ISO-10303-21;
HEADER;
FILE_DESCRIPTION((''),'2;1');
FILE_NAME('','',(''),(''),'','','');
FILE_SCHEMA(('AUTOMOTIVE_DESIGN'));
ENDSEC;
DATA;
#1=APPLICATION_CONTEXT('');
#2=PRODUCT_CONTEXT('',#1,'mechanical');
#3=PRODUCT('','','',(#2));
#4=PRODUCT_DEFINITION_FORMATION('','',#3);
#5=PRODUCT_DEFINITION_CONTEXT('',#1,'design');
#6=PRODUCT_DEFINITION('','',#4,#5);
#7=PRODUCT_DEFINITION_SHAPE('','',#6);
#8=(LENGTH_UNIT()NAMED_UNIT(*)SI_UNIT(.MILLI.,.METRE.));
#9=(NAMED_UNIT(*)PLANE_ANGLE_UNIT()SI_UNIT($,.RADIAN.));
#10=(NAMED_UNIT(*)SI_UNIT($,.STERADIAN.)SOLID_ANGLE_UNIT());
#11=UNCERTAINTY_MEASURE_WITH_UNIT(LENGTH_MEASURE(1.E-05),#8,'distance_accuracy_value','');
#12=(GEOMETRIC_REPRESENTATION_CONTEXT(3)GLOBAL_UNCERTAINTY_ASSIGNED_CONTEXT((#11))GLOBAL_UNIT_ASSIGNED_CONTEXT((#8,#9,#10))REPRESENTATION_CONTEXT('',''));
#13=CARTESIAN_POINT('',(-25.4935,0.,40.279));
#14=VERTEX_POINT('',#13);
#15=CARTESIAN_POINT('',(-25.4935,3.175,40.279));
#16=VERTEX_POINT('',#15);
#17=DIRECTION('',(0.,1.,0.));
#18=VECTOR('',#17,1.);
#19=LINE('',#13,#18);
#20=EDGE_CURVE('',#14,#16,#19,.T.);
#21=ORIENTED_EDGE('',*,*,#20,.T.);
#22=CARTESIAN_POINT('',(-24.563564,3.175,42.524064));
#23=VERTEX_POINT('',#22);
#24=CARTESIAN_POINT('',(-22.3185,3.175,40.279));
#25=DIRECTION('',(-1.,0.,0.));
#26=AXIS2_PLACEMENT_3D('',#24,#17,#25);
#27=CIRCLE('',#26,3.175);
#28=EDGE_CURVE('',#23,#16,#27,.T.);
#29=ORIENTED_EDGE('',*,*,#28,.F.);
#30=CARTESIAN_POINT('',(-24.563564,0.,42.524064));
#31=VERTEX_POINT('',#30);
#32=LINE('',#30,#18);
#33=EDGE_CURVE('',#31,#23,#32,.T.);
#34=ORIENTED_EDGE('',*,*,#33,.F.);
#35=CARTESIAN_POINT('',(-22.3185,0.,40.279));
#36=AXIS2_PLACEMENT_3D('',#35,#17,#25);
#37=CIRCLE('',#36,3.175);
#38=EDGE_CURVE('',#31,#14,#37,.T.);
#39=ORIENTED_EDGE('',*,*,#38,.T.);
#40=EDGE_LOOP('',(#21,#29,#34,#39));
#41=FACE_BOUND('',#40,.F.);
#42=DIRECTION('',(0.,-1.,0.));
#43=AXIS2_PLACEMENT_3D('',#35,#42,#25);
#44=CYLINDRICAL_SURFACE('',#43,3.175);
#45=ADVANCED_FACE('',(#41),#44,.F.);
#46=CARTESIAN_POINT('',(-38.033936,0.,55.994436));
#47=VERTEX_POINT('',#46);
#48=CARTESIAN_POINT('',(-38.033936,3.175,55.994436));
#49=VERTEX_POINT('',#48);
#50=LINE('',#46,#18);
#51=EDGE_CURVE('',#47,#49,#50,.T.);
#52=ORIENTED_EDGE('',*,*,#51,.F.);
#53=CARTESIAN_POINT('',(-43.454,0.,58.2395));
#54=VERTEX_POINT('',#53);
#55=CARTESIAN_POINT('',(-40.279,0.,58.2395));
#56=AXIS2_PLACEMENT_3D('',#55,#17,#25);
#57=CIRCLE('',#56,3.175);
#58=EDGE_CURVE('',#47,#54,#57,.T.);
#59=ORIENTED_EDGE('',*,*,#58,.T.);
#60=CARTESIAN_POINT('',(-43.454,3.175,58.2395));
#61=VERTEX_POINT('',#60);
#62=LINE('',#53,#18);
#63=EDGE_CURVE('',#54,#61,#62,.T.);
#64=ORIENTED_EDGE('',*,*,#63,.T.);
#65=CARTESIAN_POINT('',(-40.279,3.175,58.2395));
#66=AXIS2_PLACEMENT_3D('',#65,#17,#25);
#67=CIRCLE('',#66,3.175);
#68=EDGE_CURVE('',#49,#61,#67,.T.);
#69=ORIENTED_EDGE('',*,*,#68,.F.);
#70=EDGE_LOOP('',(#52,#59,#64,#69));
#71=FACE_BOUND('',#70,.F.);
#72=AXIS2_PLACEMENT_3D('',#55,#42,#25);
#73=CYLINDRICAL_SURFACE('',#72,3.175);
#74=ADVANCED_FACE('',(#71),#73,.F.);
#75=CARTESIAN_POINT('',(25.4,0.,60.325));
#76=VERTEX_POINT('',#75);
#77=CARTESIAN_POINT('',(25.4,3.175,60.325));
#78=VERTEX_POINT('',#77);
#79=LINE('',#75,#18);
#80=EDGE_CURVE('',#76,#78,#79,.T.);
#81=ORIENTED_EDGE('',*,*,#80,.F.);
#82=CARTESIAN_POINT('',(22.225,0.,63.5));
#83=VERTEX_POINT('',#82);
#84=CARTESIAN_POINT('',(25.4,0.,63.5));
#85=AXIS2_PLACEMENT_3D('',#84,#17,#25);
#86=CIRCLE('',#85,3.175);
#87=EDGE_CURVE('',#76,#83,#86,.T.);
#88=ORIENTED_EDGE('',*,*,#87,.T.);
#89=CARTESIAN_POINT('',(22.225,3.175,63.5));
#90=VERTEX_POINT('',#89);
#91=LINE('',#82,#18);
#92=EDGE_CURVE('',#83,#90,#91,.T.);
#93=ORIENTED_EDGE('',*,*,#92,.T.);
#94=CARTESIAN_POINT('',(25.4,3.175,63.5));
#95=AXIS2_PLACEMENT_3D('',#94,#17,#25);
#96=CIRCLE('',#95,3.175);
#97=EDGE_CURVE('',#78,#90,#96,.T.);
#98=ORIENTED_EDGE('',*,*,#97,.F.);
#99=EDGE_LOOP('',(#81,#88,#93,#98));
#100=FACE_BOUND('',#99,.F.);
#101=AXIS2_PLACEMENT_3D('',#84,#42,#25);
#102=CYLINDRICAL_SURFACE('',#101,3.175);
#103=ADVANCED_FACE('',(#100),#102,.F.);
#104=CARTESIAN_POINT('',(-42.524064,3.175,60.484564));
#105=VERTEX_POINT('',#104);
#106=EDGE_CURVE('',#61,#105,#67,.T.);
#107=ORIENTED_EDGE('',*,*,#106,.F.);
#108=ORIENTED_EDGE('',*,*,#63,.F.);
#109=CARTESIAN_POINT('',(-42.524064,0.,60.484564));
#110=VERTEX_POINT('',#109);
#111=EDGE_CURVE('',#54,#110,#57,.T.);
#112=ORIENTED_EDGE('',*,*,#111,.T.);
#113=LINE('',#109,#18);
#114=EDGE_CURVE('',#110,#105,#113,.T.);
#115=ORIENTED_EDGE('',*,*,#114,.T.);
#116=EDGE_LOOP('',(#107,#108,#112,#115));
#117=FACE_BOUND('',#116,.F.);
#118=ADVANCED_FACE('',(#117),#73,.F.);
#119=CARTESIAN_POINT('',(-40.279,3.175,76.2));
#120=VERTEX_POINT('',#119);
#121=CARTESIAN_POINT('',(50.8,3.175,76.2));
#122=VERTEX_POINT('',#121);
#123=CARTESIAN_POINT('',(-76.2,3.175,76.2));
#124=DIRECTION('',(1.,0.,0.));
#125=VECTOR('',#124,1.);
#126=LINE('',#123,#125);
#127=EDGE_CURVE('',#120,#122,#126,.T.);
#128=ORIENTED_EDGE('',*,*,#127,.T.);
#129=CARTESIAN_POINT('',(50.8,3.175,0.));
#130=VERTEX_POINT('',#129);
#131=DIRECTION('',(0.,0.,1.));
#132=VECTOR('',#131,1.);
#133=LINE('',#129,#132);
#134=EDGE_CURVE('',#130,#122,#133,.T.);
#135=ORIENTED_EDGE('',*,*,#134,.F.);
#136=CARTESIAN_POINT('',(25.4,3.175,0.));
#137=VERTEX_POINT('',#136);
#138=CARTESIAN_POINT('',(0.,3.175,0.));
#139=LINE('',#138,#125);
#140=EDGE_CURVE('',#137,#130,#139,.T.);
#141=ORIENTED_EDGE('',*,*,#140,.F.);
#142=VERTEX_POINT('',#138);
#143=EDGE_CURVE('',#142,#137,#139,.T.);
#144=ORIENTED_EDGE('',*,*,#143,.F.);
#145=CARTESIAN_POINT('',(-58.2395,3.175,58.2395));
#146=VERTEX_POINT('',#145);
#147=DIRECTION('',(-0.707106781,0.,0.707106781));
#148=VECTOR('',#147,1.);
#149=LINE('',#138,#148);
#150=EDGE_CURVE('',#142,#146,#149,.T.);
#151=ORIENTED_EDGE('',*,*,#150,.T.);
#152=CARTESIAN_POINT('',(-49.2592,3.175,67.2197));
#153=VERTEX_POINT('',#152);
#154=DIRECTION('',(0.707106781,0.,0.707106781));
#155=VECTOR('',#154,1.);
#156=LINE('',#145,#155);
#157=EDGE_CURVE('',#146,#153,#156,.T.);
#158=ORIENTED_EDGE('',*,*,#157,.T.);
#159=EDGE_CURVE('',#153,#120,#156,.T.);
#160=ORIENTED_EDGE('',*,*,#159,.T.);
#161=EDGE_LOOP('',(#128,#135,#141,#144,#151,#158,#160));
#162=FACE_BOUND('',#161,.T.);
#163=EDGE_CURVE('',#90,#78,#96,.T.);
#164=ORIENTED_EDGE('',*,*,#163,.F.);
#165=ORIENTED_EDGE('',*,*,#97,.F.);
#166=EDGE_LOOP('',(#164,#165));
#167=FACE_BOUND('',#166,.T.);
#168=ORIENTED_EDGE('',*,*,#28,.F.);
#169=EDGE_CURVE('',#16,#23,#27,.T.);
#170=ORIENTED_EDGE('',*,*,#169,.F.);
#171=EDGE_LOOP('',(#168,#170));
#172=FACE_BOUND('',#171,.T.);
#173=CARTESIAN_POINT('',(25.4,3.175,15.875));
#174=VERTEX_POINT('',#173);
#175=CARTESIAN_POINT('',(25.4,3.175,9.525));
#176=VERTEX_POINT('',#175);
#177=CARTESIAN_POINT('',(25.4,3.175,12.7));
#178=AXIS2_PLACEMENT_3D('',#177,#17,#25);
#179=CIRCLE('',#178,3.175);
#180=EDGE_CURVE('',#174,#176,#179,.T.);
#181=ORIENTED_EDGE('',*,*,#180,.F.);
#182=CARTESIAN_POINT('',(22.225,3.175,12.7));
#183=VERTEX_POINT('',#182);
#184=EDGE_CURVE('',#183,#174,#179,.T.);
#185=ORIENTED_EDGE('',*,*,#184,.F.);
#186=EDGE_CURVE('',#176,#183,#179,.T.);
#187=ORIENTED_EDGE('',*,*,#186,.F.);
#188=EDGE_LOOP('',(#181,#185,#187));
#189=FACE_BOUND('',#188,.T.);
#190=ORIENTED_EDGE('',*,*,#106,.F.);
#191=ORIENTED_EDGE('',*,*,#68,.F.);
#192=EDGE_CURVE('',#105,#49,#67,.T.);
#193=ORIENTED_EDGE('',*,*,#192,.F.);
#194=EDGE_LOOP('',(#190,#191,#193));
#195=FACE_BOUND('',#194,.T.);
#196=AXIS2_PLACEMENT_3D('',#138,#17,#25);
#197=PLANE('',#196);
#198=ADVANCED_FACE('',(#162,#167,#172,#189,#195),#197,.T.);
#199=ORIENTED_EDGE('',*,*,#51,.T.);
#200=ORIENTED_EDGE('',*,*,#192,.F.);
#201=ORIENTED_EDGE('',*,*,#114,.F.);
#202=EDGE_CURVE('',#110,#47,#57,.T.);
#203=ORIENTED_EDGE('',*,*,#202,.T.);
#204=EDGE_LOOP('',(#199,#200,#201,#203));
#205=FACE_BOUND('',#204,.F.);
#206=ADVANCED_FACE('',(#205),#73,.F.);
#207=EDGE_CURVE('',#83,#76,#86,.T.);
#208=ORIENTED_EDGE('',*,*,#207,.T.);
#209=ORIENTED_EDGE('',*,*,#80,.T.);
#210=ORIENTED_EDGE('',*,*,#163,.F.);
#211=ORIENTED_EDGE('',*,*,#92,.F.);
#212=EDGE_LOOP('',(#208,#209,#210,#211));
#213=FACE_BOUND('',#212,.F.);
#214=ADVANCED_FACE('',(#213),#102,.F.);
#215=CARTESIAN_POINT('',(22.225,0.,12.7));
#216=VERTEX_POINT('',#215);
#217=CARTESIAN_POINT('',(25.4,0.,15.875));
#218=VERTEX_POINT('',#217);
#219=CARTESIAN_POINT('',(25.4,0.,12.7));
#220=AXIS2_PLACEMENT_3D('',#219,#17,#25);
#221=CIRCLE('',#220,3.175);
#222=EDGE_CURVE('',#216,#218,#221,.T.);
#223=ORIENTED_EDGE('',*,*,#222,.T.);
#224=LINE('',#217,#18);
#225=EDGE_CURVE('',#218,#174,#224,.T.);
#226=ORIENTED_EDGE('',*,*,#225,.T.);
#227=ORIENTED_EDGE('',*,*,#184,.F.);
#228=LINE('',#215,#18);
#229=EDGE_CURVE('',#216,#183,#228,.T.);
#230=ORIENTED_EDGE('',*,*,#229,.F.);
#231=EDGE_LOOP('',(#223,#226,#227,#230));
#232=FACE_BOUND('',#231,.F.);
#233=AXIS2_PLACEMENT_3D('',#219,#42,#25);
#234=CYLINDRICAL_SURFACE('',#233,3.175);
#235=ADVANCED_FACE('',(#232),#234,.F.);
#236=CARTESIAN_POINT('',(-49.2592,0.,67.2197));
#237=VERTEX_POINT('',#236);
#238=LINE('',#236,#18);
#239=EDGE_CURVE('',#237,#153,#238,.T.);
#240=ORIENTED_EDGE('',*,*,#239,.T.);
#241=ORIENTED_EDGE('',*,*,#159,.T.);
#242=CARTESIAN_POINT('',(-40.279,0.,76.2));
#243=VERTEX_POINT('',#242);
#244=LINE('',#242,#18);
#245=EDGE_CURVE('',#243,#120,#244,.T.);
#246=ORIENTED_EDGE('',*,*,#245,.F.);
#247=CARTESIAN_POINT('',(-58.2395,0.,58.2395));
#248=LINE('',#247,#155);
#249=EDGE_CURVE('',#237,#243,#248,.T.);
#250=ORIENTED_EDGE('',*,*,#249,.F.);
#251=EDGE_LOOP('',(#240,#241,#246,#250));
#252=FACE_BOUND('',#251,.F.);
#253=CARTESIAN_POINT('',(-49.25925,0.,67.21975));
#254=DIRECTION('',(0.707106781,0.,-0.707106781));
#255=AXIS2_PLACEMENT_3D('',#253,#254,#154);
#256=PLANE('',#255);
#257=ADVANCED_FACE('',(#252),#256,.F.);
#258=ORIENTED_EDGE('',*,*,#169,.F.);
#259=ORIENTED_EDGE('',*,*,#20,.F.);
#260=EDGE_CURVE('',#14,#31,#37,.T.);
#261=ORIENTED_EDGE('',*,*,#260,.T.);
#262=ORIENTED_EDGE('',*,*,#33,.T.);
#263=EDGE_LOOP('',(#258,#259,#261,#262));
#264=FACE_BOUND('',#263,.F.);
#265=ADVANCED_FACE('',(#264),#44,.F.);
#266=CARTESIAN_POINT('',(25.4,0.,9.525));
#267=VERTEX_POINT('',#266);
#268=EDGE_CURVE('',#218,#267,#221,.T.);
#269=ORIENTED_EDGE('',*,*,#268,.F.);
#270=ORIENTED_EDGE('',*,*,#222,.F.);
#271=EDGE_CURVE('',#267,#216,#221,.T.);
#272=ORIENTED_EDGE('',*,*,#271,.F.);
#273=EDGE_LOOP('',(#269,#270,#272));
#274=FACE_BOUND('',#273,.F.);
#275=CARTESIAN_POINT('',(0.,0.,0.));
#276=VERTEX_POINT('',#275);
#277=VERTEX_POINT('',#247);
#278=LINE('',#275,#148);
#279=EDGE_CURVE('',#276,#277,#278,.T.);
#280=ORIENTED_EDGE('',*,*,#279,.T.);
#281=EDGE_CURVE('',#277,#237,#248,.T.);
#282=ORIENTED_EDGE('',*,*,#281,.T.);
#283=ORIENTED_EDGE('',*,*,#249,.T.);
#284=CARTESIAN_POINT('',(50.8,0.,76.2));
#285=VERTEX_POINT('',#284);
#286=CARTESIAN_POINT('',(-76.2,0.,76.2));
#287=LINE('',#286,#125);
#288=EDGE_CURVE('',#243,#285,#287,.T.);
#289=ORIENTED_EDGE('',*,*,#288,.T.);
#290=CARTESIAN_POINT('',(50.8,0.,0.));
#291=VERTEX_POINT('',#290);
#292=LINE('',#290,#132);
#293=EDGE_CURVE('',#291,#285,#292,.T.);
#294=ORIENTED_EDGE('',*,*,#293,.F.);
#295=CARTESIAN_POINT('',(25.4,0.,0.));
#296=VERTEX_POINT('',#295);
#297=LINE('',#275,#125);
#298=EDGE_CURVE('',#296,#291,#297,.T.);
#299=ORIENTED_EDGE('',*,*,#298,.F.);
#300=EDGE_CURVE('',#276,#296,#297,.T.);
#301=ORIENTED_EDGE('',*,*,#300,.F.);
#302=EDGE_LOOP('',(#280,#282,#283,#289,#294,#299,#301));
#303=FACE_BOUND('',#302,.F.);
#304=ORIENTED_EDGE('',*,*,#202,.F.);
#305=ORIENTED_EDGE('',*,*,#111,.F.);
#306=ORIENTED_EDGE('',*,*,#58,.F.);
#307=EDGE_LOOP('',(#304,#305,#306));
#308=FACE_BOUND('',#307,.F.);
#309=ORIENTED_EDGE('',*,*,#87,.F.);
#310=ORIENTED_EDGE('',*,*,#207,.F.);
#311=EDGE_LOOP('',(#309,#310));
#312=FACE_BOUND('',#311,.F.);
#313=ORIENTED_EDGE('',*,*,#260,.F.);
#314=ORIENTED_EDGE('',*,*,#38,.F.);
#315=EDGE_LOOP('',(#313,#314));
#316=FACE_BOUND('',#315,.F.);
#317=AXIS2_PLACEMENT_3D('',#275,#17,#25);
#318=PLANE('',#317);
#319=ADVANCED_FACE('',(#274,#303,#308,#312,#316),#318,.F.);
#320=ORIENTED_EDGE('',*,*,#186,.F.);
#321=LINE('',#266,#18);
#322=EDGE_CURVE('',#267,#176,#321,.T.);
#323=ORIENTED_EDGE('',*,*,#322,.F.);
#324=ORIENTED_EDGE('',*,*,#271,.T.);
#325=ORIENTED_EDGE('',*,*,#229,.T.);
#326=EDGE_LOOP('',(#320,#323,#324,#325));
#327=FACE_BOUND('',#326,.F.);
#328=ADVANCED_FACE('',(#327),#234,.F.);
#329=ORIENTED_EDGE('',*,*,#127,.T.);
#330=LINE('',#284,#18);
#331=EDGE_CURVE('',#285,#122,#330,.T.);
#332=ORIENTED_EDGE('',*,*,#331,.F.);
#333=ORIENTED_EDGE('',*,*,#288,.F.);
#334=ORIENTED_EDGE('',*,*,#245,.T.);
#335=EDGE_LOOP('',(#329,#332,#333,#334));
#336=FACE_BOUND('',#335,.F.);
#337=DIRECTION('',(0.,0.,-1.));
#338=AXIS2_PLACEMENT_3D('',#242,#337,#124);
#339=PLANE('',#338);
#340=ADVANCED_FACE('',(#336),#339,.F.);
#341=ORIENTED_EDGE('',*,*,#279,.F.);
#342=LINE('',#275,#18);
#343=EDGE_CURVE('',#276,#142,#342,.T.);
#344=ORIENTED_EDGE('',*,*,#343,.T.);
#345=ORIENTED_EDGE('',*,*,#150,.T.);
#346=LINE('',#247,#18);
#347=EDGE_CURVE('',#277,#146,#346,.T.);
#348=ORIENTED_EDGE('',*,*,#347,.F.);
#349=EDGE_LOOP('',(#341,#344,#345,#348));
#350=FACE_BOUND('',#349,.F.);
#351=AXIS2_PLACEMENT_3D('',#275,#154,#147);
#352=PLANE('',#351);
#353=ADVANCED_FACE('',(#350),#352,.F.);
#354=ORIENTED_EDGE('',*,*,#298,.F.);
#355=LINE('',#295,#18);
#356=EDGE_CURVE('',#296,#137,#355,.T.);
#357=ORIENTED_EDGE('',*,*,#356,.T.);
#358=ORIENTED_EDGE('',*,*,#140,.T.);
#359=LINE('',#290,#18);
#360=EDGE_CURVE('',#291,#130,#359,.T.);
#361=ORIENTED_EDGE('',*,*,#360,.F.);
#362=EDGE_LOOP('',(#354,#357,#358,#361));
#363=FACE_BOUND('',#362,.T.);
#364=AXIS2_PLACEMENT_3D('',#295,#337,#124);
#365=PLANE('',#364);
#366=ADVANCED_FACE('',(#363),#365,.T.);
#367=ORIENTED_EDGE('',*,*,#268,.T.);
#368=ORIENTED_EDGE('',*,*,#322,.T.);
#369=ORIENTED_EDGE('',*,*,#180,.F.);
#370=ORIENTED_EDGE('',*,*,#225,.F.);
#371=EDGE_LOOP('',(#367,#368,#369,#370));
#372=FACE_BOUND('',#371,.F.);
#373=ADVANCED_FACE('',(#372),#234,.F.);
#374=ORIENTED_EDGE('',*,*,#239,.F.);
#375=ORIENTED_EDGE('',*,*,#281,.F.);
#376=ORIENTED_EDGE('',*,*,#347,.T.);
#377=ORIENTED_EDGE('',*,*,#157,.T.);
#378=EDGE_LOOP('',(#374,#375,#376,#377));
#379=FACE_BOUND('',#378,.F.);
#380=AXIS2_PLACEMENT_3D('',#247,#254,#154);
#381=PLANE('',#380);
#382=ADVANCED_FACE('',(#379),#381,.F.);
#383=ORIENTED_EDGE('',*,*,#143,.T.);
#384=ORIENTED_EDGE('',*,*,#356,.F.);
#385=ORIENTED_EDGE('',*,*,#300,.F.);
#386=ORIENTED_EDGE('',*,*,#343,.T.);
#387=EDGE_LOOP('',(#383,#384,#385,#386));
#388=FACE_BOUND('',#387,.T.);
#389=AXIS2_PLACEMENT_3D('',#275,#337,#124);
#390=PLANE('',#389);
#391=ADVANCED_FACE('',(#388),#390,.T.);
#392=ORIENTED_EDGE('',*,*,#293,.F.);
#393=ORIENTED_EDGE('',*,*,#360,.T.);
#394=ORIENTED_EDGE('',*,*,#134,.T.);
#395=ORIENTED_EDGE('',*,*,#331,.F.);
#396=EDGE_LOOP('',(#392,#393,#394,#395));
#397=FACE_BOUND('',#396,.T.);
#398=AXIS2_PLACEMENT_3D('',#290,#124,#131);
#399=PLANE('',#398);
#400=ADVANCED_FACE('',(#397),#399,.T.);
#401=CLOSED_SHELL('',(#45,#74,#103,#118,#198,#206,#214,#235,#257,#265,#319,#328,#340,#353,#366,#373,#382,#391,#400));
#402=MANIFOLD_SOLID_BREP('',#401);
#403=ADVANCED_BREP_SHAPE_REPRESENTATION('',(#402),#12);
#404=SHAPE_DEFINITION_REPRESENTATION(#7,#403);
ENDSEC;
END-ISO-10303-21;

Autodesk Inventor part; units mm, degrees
ref_plane "YZ Plane" through (0, 0, 0) normal (1, 0, 0) x (0, 1, 0)
ref_plane "XZ Plane" through (0, 0, 0) normal (0, 1, 0) x (-1, 0, 0)
ref_plane "XY Plane" through (0, 0, 0) normal (0, 0, 1) x (1, 0, 0)
sketch "Sketch1" plane through (0, 0, 0) normal (0, 1, 0) x (-1, 0, 0)
  line L0 (0, 0) -> (-50.8, 0)
  line L1 (0, 0) -> (50.8, 0) construction
  line L2 (-25.4, 0) -> (-25.4, 12.7)
  line L3 (-25.4, 0) -> (-12.7, 0) construction
  circle A0 centre (-25.4, 12.7) radius 3.175
  line L4 (-25.4, 12.7) -> (-25.4, 63.5)
  circle A1 centre (-25.4, 63.5) radius 3.175
  line L5 (-50.8, 0) -> (-50.8, 76.2)
  line L6 (-50.8, 0) -> (25.4, 0) construction
  line L7 (0, 0) -> (76.2, 76.2)
  line L8 (0, 0) -> (107.7631, 0) construction
  line L9 (76.2, 76.2) -> (-50.8, 76.2)
  line L10 (76.2, 76.2) -> (58.2395, 58.2395)
  line L11 (76.2, 76.2) -> (101.6, 76.2) construction
  line L12 (58.2395, 58.2395) -> (40.279, 76.2)
  line L13 (49.2592, 67.2197) -> (40.279, 58.2395)
  line L14 (49.2592, 67.2197) -> (61.9592, 67.2197) construction
  line L15 (40.279, 58.2395) -> (22.3185, 40.279)
  circle A2 centre (22.3185, 40.279) radius 3.175
  circle A3 centre (40.279, 58.2395) radius 3.175
  dimension "d0" = 50.8
  dimension "d1" = 180
  dimension "d2" = 12.7
  dimension "d3" = 90
  dimension "d4" = 6.35
  dimension "d5" = 50.8
  dimension "d6" = 6.35
  dimension "d7" = 76.2
  dimension "d8" = 90
  dimension "d9" = 45
  dimension "d10" = 25.4
  dimension "d11" = 135
  dimension "d12" = 12.7
  dimension "d13" = 135
  dimension "d14" = 25.4
  dimension "d15" = 180
  dimension "d16" = 6.35
  dimension "d17" = 6.35
extrude "Extrusion1" add sketch "Sketch1" along normal blind 3.175 contours L0 L5 L9 L12 L7
properties part number "SideGusset"
